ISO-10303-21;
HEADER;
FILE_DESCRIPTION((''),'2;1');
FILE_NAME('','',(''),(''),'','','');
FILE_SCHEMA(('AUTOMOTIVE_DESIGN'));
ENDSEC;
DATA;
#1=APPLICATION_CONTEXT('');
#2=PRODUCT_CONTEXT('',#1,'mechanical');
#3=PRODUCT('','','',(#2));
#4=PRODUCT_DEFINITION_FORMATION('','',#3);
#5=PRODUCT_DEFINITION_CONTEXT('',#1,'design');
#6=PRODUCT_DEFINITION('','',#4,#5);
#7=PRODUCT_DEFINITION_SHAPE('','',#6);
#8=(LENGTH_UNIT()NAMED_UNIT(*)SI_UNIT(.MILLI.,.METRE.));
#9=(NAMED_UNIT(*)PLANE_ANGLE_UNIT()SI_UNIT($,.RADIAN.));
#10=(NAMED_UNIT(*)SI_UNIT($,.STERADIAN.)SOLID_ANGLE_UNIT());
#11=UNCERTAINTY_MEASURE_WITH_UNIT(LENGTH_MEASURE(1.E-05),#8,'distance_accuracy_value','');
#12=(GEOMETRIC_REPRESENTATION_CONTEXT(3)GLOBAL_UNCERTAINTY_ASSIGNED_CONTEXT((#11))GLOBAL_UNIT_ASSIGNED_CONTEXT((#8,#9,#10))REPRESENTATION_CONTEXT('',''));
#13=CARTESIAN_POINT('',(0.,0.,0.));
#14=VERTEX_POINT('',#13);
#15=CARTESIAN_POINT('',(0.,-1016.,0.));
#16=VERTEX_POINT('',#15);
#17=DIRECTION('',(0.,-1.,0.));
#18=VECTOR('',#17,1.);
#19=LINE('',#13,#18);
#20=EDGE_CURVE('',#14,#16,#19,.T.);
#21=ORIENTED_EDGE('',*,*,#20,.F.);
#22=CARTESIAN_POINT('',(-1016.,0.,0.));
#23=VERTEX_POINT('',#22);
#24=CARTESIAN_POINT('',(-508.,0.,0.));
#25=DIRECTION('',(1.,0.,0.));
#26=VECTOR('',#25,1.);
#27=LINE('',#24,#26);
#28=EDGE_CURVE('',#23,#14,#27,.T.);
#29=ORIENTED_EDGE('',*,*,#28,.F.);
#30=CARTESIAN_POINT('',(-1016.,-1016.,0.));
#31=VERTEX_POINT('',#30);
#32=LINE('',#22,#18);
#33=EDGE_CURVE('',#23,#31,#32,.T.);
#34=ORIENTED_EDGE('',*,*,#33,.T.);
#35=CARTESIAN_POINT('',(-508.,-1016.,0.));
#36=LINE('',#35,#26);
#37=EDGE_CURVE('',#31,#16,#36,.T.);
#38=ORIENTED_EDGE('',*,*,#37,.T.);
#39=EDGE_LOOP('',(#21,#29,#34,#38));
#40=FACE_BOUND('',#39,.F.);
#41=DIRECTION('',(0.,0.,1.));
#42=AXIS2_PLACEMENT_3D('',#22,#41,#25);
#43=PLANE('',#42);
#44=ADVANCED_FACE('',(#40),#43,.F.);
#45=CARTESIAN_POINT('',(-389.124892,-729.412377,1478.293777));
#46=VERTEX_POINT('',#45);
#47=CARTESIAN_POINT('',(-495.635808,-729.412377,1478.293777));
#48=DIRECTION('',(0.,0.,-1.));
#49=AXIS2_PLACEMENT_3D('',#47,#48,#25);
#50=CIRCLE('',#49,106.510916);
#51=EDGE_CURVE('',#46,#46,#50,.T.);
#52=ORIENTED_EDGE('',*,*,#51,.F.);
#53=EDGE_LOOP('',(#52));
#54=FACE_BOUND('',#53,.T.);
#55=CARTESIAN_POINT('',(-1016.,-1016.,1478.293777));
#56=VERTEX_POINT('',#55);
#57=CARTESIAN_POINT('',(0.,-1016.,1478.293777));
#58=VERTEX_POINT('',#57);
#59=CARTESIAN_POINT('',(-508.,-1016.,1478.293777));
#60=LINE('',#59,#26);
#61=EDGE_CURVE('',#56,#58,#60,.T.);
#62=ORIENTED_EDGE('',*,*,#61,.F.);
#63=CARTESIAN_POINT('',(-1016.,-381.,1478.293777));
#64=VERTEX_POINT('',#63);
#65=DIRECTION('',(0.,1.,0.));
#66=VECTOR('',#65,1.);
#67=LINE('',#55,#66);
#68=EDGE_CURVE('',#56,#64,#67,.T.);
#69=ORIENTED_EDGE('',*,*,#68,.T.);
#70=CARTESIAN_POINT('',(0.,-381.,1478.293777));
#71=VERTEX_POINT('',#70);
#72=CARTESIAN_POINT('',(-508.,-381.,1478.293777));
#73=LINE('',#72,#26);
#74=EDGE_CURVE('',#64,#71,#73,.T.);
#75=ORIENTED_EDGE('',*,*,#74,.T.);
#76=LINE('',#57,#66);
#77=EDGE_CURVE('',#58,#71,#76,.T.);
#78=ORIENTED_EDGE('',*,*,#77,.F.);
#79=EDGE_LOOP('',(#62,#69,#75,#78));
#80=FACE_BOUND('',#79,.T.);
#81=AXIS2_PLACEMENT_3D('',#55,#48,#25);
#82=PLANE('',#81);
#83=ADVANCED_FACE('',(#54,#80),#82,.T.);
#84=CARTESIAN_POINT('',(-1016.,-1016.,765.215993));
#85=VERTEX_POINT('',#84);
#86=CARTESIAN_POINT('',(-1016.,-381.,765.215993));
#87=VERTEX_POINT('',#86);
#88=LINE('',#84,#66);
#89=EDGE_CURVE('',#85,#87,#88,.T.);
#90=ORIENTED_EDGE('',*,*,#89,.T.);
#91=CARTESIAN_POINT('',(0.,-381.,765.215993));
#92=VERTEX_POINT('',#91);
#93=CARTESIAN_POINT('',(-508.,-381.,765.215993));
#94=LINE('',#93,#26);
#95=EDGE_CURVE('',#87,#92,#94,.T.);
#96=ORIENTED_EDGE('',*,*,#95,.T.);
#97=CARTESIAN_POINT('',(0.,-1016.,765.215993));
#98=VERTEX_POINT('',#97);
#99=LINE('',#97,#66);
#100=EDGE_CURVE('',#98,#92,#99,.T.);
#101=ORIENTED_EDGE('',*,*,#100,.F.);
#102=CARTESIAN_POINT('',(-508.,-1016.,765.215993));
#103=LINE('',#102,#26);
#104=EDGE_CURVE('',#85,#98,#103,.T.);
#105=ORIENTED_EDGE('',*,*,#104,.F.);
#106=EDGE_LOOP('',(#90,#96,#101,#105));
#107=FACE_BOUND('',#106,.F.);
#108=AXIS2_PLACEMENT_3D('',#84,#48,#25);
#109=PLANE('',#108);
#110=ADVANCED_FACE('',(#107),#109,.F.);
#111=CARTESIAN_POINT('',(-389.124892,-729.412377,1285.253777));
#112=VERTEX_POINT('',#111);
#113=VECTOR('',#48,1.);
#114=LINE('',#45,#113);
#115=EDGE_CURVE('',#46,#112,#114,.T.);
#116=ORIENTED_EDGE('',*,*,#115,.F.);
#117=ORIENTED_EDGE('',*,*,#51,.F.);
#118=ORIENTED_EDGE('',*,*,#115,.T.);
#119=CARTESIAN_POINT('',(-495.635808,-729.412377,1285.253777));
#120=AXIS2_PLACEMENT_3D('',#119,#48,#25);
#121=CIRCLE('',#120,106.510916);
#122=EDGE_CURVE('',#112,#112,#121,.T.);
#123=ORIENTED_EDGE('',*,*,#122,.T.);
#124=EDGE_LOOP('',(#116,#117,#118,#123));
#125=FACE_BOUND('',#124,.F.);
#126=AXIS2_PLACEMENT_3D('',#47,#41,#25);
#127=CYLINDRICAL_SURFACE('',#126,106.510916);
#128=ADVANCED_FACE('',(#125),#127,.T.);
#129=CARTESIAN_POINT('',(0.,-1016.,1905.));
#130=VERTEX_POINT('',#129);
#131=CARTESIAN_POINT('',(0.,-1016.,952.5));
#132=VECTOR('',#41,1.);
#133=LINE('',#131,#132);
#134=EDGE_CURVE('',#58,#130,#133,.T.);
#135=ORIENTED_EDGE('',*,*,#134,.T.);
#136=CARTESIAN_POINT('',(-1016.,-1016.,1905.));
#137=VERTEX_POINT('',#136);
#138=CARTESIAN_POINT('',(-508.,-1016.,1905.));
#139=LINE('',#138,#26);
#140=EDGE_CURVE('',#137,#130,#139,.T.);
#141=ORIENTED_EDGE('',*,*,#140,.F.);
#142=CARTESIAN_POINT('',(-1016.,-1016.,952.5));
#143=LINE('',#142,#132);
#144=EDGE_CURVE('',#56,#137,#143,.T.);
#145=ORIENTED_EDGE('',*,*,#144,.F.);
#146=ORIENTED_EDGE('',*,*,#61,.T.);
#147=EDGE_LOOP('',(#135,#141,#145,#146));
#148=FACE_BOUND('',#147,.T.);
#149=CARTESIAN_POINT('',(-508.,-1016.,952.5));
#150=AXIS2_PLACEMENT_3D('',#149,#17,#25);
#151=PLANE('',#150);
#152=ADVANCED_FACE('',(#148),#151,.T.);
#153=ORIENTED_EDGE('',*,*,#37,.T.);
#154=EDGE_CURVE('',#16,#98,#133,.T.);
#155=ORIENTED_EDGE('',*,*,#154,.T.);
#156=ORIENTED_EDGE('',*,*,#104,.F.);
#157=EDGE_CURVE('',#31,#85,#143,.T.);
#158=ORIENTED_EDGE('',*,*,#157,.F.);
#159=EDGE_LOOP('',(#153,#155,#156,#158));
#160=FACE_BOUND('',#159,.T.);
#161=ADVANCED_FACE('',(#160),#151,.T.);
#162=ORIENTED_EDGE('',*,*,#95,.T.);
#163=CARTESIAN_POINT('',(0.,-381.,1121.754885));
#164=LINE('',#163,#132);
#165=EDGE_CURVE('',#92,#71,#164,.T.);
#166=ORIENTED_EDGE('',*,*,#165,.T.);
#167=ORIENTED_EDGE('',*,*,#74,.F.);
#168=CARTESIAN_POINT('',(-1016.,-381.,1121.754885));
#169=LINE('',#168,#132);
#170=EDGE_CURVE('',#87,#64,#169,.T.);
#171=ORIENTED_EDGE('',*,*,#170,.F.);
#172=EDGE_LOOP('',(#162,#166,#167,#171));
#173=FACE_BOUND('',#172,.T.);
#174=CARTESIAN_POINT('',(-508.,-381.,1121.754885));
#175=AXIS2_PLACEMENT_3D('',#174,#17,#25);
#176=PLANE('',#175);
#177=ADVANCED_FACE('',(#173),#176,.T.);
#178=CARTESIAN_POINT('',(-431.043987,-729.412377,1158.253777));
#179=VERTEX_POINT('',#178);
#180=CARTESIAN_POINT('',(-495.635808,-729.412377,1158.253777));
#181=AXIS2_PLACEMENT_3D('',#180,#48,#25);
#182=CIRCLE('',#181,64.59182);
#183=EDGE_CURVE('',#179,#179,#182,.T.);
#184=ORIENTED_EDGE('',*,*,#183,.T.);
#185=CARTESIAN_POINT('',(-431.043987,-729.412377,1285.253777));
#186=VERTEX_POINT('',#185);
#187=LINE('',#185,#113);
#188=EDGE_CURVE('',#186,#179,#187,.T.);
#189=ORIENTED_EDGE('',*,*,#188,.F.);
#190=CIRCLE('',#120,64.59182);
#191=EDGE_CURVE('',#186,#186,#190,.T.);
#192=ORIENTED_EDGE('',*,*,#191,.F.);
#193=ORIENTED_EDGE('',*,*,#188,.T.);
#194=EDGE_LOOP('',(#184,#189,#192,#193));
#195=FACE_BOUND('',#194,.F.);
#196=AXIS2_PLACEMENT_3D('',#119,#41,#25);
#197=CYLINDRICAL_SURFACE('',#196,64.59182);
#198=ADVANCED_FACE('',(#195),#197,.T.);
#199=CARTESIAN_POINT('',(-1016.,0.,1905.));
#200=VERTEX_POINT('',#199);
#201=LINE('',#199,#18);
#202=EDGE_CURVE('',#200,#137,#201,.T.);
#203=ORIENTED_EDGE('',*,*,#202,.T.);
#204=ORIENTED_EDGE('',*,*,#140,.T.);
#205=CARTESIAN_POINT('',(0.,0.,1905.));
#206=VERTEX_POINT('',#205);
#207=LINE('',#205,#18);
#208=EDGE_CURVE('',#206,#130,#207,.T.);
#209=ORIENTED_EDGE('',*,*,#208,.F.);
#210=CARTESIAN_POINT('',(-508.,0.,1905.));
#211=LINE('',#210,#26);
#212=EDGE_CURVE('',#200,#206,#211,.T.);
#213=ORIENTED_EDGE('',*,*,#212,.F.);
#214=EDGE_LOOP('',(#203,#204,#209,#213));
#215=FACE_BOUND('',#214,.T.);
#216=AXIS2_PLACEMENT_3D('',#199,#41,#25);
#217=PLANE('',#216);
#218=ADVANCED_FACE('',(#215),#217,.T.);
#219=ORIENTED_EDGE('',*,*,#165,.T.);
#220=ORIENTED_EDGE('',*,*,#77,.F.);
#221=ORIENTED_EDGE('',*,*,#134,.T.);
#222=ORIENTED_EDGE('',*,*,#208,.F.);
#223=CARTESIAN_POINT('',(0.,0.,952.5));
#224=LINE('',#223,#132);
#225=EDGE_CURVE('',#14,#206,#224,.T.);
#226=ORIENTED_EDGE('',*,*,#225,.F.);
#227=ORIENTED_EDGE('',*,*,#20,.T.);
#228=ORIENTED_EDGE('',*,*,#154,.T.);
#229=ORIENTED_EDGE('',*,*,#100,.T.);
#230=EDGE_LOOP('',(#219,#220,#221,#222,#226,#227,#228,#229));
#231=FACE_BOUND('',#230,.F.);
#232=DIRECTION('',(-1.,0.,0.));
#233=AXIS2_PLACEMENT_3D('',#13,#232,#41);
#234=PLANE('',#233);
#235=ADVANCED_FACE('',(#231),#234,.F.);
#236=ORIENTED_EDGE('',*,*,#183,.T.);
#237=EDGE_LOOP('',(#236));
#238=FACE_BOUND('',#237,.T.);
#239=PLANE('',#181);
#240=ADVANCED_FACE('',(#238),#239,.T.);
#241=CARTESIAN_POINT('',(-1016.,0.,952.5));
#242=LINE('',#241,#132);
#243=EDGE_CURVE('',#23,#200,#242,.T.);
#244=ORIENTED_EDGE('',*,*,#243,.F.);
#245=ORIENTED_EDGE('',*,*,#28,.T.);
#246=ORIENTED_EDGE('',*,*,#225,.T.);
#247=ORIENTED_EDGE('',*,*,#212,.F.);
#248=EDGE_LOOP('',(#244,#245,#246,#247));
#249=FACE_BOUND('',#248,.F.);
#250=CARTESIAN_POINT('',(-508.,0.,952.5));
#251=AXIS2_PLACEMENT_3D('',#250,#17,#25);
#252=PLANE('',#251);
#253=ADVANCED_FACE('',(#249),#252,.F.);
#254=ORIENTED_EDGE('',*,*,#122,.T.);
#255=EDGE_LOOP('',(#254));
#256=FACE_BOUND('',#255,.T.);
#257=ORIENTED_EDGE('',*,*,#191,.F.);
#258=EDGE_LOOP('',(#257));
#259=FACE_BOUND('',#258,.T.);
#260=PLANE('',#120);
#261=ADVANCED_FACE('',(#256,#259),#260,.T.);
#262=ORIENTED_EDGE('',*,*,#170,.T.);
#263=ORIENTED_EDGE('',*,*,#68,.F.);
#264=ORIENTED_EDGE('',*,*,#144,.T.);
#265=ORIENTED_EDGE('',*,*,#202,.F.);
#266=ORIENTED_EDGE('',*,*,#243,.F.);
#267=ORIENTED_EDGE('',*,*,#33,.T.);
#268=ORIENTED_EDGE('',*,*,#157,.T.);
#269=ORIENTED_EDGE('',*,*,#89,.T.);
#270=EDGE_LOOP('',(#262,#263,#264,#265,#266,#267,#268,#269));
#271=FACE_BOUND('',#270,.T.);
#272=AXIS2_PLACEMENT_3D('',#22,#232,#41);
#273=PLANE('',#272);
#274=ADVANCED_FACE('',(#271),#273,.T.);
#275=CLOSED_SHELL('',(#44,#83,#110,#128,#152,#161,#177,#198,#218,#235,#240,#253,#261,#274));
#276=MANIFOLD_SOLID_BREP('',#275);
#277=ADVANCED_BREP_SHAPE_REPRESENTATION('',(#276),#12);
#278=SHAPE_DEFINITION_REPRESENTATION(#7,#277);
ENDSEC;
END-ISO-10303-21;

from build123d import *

# Parameters (mm, degrees)
F0_W     = 1016
F0_H     = 1905
F1_DEPTH = 1016
F2_W     = 1016
F2_H     = 713.0777835846
F3_DEPTH = 635
F4_R     = 106.5109159408
F5_DEPTH = 193.04
F6_R     = 64.5918203827
F7_DEPTH = 127


# Not quite as in the source:
# - the program builds the solid bodies; features that only make, move or delete a surface that nothing else refers to are left out


with BuildPart() as f1:
    # F0 (on Front) → F1 (new body)
    with BuildSketch(Plane.XZ):
        with Locations((-508, 952.5)):
            Rectangle(F0_W, F0_H)
    extrude(amount=F1_DEPTH)

    # F2 (on face) → F3 (cut)
    with BuildSketch(Plane.XZ.offset(1016)):
        with Locations((-508, 1121.7548847198)):
            Rectangle(F2_W, F2_H)
    extrude(amount=-F3_DEPTH, mode=Mode.SUBTRACT)

    # F4 (on face) → F5 (join)
    with BuildSketch(Plane(origin=(0, 0, 1478.2937765121), x_dir=(1, 0, 0), z_dir=(0, 0, -1))):
        with Locations((-495.6358075142, 729.4123768806)):
            Circle(F4_R)
    extrude(amount=F5_DEPTH)

    # F6 (on face) → F7 (join)
    with BuildSketch(Plane(origin=(0, 0, 1285.2537765121), x_dir=(1, 0, 0), z_dir=(0, 0, -1))):
        with Locations((-495.6358075142, 729.4123768806)):
            Circle(F6_R)
    extrude(amount=F7_DEPTH)


solid = f1.part
